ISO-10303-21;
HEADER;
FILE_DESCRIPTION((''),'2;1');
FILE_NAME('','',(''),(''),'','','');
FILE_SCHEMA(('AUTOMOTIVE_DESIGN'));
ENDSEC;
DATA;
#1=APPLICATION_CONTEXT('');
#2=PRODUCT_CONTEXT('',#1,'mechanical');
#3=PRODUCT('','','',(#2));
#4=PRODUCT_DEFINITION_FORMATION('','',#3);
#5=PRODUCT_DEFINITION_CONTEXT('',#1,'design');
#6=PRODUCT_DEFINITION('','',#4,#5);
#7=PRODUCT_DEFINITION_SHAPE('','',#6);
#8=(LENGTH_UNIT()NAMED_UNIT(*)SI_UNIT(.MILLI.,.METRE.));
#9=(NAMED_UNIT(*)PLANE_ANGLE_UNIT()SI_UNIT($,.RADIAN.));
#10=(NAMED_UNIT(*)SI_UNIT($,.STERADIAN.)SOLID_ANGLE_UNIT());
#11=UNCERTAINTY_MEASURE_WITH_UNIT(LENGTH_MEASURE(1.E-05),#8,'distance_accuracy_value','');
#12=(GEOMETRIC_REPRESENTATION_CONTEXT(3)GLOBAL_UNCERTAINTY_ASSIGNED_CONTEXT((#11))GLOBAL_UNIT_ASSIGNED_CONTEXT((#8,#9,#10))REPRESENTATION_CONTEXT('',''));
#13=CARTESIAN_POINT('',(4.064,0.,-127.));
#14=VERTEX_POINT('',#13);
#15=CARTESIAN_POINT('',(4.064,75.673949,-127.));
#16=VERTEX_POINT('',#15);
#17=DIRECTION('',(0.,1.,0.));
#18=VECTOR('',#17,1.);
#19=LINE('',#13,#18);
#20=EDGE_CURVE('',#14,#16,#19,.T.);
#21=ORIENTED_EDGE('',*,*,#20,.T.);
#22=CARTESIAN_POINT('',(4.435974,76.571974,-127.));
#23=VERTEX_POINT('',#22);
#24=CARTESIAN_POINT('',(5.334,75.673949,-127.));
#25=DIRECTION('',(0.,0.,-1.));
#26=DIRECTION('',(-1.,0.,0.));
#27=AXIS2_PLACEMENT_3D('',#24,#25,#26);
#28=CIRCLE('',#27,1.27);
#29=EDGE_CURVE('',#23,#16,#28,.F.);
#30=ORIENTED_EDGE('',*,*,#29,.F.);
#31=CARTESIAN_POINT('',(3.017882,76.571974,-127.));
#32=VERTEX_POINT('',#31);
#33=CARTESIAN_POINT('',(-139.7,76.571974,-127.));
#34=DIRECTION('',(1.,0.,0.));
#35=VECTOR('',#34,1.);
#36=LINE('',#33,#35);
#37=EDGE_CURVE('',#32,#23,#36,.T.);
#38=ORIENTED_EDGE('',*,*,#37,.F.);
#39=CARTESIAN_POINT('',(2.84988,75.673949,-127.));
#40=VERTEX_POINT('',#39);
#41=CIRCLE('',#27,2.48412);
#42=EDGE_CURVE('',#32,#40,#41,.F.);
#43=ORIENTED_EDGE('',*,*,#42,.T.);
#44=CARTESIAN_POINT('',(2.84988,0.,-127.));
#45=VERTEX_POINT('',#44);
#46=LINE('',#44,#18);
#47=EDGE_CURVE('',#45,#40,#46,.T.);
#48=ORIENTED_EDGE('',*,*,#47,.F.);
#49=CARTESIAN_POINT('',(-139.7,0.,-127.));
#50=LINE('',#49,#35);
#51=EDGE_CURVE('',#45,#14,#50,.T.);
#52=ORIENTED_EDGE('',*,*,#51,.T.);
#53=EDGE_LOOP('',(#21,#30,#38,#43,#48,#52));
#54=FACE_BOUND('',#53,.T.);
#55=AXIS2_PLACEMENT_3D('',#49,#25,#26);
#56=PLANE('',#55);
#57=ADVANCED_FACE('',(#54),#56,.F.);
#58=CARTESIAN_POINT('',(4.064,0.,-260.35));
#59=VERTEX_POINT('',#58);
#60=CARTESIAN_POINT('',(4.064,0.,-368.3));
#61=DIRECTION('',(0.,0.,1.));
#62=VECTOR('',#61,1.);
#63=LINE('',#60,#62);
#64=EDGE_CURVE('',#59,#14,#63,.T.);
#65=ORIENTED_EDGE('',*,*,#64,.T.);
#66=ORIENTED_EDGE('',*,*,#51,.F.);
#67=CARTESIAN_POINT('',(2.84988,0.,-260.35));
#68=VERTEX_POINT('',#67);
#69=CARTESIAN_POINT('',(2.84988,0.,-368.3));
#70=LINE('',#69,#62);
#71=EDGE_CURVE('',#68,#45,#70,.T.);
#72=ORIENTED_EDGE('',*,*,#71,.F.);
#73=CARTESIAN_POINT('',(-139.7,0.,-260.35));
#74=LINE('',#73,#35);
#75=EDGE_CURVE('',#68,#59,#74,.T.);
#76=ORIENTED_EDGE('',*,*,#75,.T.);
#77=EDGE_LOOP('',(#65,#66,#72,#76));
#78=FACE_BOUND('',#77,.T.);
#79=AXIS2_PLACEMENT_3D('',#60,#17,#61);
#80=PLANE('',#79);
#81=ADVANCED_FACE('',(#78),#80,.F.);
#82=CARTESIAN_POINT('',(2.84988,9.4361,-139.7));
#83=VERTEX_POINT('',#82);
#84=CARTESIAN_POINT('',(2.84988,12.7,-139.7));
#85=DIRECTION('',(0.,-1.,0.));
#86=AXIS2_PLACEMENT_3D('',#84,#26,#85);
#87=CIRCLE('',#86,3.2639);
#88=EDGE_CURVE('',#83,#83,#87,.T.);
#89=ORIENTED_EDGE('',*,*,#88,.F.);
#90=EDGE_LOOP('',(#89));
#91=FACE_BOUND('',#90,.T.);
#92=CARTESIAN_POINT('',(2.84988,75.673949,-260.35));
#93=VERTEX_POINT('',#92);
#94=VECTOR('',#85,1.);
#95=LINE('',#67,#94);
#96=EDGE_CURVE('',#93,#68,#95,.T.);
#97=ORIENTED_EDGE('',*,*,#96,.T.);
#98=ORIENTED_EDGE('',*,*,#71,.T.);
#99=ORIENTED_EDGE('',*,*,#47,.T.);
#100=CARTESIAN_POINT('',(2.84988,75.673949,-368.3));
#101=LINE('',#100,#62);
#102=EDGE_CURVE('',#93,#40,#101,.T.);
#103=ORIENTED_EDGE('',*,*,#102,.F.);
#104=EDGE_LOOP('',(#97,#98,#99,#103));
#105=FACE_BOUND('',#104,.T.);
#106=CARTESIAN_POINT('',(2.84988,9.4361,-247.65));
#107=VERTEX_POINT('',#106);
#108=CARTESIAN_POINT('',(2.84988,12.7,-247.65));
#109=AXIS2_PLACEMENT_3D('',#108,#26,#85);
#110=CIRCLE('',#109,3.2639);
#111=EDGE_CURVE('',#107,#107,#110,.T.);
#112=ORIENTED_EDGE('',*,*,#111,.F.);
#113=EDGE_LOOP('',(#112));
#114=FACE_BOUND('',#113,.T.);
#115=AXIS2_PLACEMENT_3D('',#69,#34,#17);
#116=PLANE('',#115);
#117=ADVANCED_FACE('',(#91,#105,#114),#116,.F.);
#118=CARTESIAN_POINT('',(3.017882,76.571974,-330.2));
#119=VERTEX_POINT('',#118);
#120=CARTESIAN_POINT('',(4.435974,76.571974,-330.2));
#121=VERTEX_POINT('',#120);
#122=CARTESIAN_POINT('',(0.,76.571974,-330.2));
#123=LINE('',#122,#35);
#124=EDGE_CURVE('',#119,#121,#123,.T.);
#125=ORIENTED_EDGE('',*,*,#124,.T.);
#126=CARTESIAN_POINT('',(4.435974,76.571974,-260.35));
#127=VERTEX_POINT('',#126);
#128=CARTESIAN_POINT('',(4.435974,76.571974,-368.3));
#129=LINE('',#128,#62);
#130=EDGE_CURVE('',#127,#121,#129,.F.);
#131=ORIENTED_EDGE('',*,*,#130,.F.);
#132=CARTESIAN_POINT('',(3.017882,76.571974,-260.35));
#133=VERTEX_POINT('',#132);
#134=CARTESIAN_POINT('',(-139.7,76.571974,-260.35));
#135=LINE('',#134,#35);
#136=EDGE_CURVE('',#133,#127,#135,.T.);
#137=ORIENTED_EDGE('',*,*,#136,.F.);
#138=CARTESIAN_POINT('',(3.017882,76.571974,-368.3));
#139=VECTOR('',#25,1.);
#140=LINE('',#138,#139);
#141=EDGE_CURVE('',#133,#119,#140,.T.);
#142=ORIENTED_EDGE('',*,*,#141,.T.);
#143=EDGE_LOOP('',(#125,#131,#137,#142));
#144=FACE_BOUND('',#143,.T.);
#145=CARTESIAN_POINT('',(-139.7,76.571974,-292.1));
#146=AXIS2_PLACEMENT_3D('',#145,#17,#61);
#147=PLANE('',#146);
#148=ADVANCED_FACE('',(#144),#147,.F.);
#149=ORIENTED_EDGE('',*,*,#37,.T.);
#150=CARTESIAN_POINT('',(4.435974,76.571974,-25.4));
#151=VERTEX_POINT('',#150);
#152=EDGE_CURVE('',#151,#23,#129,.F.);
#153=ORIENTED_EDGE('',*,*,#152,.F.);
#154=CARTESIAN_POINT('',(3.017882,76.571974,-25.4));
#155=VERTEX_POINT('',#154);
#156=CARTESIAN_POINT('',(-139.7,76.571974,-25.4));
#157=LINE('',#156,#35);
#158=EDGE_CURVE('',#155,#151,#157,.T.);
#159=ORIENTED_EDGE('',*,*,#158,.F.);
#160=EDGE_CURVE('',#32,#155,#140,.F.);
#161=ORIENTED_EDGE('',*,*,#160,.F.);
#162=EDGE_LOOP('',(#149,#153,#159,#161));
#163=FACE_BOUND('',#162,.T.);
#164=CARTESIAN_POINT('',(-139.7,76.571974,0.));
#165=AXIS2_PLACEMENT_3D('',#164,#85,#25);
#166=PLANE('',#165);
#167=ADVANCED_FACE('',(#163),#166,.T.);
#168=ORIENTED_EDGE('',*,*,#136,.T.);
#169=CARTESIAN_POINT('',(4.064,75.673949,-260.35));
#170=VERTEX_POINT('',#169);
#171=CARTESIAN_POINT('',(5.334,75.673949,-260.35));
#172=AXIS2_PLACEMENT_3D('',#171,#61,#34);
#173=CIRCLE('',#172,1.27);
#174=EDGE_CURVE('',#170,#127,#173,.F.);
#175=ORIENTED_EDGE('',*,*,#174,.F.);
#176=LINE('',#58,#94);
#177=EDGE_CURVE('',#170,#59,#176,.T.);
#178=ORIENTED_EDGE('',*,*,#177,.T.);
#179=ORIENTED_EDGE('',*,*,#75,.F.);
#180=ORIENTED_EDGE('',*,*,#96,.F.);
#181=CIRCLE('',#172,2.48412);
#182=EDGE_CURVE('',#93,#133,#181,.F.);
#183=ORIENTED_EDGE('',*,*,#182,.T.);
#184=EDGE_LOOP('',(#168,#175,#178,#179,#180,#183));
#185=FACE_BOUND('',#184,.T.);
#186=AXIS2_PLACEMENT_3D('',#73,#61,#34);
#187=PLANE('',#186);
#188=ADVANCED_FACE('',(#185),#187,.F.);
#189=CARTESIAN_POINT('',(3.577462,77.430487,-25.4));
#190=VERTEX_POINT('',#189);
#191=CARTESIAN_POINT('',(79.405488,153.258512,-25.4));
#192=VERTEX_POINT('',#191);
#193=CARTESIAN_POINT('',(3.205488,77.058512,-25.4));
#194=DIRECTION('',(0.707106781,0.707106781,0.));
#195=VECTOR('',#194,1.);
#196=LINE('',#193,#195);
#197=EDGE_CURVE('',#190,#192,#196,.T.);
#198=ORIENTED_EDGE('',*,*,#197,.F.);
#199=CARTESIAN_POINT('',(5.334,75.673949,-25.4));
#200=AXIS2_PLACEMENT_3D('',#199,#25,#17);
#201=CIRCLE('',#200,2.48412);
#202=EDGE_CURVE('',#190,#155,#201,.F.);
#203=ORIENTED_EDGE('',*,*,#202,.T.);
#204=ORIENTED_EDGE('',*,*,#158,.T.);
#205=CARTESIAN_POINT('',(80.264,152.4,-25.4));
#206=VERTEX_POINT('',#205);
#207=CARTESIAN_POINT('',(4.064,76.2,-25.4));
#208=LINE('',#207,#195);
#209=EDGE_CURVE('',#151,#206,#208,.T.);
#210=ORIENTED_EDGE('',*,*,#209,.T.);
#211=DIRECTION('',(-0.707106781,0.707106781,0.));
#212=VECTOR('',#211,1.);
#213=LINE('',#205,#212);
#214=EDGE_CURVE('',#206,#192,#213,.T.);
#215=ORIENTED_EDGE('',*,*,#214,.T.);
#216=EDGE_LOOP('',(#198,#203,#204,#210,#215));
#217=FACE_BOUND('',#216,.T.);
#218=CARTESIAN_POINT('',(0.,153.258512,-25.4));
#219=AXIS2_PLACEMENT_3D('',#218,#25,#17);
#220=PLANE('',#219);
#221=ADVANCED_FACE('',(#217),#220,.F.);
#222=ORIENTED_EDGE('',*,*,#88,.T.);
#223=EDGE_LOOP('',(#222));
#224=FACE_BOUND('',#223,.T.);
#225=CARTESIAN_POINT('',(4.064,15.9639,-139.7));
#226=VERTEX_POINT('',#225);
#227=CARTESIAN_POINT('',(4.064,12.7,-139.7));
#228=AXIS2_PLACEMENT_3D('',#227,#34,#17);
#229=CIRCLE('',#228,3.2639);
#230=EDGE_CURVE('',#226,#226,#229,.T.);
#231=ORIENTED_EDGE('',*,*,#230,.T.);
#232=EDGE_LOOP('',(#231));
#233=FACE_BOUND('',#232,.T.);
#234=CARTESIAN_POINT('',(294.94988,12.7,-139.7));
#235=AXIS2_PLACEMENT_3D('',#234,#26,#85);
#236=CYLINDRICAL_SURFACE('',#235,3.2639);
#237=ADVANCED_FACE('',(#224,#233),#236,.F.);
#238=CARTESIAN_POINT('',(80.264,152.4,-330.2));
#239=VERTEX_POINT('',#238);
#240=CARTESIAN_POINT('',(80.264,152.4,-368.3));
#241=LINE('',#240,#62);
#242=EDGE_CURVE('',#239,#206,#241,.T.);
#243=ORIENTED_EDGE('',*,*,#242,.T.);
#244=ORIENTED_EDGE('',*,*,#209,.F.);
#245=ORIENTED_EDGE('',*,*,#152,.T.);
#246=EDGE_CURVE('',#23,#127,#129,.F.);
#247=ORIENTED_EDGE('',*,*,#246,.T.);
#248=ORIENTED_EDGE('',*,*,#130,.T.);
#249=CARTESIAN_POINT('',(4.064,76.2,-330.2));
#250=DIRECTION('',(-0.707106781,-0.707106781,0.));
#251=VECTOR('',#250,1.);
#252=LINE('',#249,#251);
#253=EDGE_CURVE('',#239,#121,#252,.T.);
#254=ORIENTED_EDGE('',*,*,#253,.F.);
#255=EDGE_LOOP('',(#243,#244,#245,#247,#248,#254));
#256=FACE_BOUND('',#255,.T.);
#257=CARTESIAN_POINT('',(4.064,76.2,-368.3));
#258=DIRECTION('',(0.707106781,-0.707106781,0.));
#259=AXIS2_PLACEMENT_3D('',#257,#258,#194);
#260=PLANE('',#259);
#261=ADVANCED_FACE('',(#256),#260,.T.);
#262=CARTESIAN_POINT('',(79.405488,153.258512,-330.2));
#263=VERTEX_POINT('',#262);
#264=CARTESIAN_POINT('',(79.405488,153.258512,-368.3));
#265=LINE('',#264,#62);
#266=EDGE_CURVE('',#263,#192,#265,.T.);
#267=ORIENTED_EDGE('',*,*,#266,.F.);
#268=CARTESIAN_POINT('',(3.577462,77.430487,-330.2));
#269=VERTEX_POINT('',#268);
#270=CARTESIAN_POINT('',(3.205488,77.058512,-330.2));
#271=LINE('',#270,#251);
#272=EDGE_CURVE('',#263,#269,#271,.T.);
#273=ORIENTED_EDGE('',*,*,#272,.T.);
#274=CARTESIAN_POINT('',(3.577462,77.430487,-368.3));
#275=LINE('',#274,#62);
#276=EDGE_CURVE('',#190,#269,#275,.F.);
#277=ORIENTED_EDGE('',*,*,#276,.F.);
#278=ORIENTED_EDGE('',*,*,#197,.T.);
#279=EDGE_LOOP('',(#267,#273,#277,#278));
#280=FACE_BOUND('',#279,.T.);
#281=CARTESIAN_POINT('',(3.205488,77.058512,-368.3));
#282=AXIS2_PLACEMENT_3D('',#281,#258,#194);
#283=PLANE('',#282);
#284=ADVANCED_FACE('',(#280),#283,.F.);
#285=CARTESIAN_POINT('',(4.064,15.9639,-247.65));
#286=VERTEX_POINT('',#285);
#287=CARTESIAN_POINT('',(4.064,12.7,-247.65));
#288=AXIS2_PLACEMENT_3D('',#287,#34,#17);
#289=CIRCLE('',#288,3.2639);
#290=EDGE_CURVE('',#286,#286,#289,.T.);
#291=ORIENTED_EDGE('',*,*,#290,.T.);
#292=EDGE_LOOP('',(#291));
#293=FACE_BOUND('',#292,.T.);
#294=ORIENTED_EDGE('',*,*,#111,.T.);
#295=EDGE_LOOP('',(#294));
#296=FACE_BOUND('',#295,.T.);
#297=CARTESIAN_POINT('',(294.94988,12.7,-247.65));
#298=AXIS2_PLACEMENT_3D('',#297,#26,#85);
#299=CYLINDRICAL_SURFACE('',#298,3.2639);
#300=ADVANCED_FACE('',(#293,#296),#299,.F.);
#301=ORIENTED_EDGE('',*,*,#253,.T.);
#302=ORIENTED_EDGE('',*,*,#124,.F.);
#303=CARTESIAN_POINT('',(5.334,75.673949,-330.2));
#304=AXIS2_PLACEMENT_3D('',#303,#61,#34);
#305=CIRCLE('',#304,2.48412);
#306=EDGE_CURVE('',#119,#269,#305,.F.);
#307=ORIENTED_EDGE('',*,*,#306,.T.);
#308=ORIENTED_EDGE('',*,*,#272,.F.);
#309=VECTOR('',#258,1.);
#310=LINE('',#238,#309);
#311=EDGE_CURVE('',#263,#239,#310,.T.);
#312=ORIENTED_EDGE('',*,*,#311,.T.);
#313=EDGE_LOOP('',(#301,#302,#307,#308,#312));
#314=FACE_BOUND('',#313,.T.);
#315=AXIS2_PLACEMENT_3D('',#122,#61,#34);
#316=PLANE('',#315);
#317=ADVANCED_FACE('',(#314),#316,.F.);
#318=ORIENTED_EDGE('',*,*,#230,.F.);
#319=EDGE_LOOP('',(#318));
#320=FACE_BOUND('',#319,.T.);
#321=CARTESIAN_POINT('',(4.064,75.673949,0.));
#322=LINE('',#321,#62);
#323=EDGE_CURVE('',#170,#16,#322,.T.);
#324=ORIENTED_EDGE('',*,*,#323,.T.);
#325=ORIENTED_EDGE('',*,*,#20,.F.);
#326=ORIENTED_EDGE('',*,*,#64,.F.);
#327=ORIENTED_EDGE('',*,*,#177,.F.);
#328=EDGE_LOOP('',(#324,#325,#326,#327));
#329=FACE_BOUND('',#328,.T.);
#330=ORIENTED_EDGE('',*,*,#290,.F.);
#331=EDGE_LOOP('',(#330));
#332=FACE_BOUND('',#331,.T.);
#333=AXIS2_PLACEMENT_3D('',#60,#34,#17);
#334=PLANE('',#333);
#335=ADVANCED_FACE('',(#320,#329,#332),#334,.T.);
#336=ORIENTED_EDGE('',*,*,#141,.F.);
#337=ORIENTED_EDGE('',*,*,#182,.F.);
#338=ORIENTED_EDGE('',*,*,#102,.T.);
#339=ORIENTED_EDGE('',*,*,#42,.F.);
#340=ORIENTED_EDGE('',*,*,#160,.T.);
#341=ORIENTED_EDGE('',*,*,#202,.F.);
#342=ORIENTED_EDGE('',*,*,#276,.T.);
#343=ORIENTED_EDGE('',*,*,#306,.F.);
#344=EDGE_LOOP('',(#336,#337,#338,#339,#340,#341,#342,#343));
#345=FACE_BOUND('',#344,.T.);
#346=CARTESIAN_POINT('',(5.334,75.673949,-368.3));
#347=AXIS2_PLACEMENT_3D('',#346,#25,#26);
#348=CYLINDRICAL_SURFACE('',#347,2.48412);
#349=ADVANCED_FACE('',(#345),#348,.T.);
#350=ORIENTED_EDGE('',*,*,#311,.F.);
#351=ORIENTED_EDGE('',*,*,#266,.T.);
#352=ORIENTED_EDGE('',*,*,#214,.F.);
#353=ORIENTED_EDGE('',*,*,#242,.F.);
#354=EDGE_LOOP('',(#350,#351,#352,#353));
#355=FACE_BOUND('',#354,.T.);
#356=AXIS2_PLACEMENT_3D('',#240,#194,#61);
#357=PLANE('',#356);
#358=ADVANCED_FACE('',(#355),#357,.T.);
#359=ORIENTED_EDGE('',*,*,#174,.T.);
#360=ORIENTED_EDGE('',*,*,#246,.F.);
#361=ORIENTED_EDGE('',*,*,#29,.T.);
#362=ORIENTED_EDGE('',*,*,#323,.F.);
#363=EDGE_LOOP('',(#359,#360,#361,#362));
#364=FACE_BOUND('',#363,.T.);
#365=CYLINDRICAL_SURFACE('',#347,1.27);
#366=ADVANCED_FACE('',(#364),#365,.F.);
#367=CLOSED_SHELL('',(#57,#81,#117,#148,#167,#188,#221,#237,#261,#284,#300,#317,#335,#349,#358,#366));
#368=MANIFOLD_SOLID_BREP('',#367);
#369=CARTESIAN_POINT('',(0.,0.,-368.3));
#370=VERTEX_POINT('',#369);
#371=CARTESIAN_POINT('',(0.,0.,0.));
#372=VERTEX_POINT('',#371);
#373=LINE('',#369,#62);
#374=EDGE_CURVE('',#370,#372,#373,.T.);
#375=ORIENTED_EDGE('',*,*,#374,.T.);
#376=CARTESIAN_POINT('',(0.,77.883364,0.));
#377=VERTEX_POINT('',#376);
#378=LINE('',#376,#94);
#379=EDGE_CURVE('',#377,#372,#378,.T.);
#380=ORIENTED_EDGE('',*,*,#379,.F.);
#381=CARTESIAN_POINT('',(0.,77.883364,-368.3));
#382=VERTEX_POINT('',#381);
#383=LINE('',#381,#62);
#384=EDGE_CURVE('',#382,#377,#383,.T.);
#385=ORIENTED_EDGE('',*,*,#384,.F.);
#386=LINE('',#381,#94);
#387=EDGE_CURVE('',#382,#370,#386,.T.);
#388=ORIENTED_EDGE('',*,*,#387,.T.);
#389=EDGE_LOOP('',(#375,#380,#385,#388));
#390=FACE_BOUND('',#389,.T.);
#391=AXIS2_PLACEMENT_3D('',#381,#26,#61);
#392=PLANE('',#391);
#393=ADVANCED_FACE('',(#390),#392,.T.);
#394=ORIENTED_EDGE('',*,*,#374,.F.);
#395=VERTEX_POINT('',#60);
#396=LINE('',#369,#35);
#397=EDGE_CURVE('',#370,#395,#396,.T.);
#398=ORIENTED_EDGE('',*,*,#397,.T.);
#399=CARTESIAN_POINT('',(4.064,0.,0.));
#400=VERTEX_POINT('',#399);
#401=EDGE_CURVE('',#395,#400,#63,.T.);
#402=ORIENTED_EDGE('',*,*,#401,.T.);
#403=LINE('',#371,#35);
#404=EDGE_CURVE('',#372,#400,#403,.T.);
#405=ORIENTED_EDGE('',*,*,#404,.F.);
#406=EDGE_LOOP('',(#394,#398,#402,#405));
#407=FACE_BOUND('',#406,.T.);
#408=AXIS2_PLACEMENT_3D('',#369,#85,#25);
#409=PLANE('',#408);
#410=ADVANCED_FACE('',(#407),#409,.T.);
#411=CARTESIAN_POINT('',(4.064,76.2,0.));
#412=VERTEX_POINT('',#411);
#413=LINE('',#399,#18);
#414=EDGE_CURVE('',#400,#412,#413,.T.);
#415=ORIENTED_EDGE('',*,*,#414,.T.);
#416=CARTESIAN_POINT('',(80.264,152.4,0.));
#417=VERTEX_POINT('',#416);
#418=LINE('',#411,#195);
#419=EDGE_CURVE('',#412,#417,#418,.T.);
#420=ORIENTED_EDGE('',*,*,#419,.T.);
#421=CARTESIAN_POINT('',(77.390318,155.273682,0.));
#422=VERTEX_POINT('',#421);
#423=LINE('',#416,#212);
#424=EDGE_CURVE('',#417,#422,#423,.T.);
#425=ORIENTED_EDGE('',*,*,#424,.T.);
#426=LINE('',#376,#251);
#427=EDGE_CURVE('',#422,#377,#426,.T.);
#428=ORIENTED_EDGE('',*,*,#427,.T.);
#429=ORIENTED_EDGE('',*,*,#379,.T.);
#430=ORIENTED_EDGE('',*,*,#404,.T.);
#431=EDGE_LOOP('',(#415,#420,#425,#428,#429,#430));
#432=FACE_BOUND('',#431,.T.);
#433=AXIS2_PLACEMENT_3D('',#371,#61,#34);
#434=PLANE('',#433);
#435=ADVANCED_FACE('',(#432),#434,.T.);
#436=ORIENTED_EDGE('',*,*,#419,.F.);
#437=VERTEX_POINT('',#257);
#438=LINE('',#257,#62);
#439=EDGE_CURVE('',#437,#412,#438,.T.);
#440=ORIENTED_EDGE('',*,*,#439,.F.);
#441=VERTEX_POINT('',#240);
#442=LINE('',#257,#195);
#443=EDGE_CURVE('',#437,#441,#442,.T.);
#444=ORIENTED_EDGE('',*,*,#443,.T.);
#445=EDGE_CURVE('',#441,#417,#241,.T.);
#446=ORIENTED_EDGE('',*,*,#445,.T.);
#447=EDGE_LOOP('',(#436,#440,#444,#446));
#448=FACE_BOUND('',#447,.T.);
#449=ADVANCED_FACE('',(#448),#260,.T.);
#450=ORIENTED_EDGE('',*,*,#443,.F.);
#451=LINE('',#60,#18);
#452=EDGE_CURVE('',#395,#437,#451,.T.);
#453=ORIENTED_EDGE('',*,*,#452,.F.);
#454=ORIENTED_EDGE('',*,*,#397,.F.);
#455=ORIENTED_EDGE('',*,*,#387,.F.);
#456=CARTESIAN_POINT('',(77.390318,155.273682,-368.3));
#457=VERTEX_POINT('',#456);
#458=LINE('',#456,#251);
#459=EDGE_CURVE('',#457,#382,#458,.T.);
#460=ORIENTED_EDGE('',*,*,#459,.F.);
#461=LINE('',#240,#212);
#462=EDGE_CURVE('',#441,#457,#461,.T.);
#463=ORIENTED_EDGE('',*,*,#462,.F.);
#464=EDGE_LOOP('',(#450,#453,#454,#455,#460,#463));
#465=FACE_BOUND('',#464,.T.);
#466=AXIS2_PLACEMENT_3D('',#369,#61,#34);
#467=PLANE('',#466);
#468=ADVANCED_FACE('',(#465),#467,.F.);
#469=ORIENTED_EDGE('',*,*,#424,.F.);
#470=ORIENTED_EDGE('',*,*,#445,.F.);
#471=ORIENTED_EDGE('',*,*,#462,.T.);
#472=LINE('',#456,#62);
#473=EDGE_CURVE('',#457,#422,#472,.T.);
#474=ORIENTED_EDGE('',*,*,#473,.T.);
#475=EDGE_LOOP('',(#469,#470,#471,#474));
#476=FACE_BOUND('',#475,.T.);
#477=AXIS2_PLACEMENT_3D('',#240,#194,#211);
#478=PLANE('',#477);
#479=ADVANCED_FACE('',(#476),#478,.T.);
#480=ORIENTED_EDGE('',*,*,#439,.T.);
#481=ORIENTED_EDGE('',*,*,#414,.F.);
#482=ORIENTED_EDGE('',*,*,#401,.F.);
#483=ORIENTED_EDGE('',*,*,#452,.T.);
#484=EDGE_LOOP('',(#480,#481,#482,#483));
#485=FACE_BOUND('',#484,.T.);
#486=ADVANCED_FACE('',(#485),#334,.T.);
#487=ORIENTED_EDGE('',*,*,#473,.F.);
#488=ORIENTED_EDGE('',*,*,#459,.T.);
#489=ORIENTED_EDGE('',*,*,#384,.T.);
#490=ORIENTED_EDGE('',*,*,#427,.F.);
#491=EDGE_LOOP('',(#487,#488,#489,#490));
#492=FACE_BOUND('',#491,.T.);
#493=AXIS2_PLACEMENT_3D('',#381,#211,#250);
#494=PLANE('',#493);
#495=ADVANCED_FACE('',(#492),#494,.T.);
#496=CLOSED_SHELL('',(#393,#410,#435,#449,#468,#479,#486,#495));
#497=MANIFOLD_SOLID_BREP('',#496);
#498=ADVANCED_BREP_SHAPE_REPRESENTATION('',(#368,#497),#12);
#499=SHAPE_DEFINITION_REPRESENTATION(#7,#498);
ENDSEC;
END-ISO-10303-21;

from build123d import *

# Parameters (mm, degrees)
BOSS_EXTRUDE2_DEPTH  = 368.3
CONVERT_SOLID2_START = -368.3
CONVERT_SOLID2_DEPTH = 368.3
SKETCH12_W           = 127
SKETCH12_H           = 76.571974388
CUT_EXTRUDE1_DEPTH   = 292.1
SKETCH13_W           = 31.75
SKETCH13_H           = 76.571974388
CUT_EXTRUDE2_DEPTH   = 292.1
SKETCH14_R           = 3.2639
CUT_EXTRUDE3_DEPTH   = 292.1
SKETCH16_W           = 38.1
SKETCH16_H           = 76.686538097
CUT_EXTRUDE4_DEPTH   = 428.7622778
SKETCH17_W           = 125.224844509
SKETCH17_H           = 76.571974388
CUT_EXTRUDE5_DEPTH   = 428.7622778
SKETCH18_W           = 25.4
SKETCH18_H           = 153.258512485
CUT_EXTRUDE6_DEPTH   = 428.7622778


# Read off the part's stored shape, not the designer's step: Convert-Solid2
with BuildPart() as part:
    # Sketch7 → Boss-Extrude2 (new body)
    with BuildSketch(Plane.XY):
        Polygon((0, 0), (4.064, 0), (4.064, 76.2), (80.264, 152.4), (77.390318041, 155.273681959), (77.208487056, 155.091850973), (0, 77.883363917), align=None)
    extrude(amount=-BOSS_EXTRUDE2_DEPTH)


with BuildPart() as body_2:
    # Convert-Solid2 outline → Convert-Solid2 (new body)
    with BuildSketch(Plane.XY.offset(CONVERT_SOLID2_START)):
        with BuildLine():
            Line((2.84988, 0), (4.064, 0))
            Line((4.064, 0), (4.064, 75.673948776))
            ThreePointArc((4.064, 75.673948776), (4.160672994, 76.159956735), (4.435974388, 76.571974388))
            Line((4.435974388, 76.571974388), (80.264, 152.4))
            Line((80.264, 152.4), (79.405487515, 153.258512485))
            Line((79.405487515, 153.258512485), (3.577461903, 77.430486873))
            ThreePointArc((3.577461903, 77.430486873), (3.038972376, 76.624580344), (2.84988, 75.673948776))
            Line((2.84988, 75.673948776), (2.84988, 0))
        make_face()
    extrude(amount=CONVERT_SOLID2_DEPTH)

    # Sketch12 → Cut-Extrude1 (cut)
    with BuildSketch(Plane(origin=(152.4, 0, 0), x_dir=(0, 0, -1), z_dir=(1, 0, 0))):
        with Locations((63.5, 38.285987194)):
            Rectangle(SKETCH12_W, SKETCH12_H)
    extrude(amount=-CUT_EXTRUDE1_DEPTH, mode=Mode.SUBTRACT)

    # Sketch13 → Cut-Extrude2 (cut)
    with BuildSketch(Plane(origin=(152.4, 0, 0), x_dir=(0, 0, -1), z_dir=(1, 0, 0))):
        with Locations((276.225, 38.285987194)):
            Rectangle(SKETCH13_W, SKETCH13_H)
    extrude(amount=-CUT_EXTRUDE2_DEPTH, mode=Mode.SUBTRACT)

    # Sketch14 → Cut-Extrude3 (cut)
    with BuildSketch(Plane.ZY.offset(-2.84988)):
        with Locations(Location((-247.65, 12.7, 0), (0, 0, 270))):
            Circle(SKETCH14_R)
        with Locations(Location((-139.7, 12.7, 0), (0, 0, 270))):
            Circle(SKETCH14_R)
    extrude(amount=-CUT_EXTRUDE3_DEPTH, mode=Mode.SUBTRACT)

    # Sketch16 → Cut-Extrude4 (cut, through all)
    with BuildSketch(Plane(origin=(152.4, 0, 0), x_dir=(0, 0, -1), z_dir=(1, 0, 0))):
        with Locations((349.25, 114.915243437)):
            Rectangle(SKETCH16_W, SKETCH16_H)
    extrude(amount=-CUT_EXTRUDE4_DEPTH, mode=Mode.SUBTRACT)

    # Sketch17 → Cut-Extrude5 (cut, through all)
    with BuildSketch(Plane(origin=(152.4, 0, 0), x_dir=(0, 0, -1), z_dir=(1, 0, 0))):
        with Locations((322.962422254, 38.285987194)):
            Rectangle(SKETCH17_W, SKETCH17_H)
    extrude(amount=-CUT_EXTRUDE5_DEPTH, mode=Mode.SUBTRACT)

    # Sketch18 → Cut-Extrude6 (cut, through all)
    with BuildSketch(Plane(origin=(152.4, 0, 0), x_dir=(0, 0, -1), z_dir=(1, 0, 0))):
        with Locations((12.7, 76.629256243)):
            Rectangle(SKETCH18_W, SKETCH18_H)
    extrude(amount=-CUT_EXTRUDE6_DEPTH, mode=Mode.SUBTRACT)


solid = Compound([part.part, body_2.part])
